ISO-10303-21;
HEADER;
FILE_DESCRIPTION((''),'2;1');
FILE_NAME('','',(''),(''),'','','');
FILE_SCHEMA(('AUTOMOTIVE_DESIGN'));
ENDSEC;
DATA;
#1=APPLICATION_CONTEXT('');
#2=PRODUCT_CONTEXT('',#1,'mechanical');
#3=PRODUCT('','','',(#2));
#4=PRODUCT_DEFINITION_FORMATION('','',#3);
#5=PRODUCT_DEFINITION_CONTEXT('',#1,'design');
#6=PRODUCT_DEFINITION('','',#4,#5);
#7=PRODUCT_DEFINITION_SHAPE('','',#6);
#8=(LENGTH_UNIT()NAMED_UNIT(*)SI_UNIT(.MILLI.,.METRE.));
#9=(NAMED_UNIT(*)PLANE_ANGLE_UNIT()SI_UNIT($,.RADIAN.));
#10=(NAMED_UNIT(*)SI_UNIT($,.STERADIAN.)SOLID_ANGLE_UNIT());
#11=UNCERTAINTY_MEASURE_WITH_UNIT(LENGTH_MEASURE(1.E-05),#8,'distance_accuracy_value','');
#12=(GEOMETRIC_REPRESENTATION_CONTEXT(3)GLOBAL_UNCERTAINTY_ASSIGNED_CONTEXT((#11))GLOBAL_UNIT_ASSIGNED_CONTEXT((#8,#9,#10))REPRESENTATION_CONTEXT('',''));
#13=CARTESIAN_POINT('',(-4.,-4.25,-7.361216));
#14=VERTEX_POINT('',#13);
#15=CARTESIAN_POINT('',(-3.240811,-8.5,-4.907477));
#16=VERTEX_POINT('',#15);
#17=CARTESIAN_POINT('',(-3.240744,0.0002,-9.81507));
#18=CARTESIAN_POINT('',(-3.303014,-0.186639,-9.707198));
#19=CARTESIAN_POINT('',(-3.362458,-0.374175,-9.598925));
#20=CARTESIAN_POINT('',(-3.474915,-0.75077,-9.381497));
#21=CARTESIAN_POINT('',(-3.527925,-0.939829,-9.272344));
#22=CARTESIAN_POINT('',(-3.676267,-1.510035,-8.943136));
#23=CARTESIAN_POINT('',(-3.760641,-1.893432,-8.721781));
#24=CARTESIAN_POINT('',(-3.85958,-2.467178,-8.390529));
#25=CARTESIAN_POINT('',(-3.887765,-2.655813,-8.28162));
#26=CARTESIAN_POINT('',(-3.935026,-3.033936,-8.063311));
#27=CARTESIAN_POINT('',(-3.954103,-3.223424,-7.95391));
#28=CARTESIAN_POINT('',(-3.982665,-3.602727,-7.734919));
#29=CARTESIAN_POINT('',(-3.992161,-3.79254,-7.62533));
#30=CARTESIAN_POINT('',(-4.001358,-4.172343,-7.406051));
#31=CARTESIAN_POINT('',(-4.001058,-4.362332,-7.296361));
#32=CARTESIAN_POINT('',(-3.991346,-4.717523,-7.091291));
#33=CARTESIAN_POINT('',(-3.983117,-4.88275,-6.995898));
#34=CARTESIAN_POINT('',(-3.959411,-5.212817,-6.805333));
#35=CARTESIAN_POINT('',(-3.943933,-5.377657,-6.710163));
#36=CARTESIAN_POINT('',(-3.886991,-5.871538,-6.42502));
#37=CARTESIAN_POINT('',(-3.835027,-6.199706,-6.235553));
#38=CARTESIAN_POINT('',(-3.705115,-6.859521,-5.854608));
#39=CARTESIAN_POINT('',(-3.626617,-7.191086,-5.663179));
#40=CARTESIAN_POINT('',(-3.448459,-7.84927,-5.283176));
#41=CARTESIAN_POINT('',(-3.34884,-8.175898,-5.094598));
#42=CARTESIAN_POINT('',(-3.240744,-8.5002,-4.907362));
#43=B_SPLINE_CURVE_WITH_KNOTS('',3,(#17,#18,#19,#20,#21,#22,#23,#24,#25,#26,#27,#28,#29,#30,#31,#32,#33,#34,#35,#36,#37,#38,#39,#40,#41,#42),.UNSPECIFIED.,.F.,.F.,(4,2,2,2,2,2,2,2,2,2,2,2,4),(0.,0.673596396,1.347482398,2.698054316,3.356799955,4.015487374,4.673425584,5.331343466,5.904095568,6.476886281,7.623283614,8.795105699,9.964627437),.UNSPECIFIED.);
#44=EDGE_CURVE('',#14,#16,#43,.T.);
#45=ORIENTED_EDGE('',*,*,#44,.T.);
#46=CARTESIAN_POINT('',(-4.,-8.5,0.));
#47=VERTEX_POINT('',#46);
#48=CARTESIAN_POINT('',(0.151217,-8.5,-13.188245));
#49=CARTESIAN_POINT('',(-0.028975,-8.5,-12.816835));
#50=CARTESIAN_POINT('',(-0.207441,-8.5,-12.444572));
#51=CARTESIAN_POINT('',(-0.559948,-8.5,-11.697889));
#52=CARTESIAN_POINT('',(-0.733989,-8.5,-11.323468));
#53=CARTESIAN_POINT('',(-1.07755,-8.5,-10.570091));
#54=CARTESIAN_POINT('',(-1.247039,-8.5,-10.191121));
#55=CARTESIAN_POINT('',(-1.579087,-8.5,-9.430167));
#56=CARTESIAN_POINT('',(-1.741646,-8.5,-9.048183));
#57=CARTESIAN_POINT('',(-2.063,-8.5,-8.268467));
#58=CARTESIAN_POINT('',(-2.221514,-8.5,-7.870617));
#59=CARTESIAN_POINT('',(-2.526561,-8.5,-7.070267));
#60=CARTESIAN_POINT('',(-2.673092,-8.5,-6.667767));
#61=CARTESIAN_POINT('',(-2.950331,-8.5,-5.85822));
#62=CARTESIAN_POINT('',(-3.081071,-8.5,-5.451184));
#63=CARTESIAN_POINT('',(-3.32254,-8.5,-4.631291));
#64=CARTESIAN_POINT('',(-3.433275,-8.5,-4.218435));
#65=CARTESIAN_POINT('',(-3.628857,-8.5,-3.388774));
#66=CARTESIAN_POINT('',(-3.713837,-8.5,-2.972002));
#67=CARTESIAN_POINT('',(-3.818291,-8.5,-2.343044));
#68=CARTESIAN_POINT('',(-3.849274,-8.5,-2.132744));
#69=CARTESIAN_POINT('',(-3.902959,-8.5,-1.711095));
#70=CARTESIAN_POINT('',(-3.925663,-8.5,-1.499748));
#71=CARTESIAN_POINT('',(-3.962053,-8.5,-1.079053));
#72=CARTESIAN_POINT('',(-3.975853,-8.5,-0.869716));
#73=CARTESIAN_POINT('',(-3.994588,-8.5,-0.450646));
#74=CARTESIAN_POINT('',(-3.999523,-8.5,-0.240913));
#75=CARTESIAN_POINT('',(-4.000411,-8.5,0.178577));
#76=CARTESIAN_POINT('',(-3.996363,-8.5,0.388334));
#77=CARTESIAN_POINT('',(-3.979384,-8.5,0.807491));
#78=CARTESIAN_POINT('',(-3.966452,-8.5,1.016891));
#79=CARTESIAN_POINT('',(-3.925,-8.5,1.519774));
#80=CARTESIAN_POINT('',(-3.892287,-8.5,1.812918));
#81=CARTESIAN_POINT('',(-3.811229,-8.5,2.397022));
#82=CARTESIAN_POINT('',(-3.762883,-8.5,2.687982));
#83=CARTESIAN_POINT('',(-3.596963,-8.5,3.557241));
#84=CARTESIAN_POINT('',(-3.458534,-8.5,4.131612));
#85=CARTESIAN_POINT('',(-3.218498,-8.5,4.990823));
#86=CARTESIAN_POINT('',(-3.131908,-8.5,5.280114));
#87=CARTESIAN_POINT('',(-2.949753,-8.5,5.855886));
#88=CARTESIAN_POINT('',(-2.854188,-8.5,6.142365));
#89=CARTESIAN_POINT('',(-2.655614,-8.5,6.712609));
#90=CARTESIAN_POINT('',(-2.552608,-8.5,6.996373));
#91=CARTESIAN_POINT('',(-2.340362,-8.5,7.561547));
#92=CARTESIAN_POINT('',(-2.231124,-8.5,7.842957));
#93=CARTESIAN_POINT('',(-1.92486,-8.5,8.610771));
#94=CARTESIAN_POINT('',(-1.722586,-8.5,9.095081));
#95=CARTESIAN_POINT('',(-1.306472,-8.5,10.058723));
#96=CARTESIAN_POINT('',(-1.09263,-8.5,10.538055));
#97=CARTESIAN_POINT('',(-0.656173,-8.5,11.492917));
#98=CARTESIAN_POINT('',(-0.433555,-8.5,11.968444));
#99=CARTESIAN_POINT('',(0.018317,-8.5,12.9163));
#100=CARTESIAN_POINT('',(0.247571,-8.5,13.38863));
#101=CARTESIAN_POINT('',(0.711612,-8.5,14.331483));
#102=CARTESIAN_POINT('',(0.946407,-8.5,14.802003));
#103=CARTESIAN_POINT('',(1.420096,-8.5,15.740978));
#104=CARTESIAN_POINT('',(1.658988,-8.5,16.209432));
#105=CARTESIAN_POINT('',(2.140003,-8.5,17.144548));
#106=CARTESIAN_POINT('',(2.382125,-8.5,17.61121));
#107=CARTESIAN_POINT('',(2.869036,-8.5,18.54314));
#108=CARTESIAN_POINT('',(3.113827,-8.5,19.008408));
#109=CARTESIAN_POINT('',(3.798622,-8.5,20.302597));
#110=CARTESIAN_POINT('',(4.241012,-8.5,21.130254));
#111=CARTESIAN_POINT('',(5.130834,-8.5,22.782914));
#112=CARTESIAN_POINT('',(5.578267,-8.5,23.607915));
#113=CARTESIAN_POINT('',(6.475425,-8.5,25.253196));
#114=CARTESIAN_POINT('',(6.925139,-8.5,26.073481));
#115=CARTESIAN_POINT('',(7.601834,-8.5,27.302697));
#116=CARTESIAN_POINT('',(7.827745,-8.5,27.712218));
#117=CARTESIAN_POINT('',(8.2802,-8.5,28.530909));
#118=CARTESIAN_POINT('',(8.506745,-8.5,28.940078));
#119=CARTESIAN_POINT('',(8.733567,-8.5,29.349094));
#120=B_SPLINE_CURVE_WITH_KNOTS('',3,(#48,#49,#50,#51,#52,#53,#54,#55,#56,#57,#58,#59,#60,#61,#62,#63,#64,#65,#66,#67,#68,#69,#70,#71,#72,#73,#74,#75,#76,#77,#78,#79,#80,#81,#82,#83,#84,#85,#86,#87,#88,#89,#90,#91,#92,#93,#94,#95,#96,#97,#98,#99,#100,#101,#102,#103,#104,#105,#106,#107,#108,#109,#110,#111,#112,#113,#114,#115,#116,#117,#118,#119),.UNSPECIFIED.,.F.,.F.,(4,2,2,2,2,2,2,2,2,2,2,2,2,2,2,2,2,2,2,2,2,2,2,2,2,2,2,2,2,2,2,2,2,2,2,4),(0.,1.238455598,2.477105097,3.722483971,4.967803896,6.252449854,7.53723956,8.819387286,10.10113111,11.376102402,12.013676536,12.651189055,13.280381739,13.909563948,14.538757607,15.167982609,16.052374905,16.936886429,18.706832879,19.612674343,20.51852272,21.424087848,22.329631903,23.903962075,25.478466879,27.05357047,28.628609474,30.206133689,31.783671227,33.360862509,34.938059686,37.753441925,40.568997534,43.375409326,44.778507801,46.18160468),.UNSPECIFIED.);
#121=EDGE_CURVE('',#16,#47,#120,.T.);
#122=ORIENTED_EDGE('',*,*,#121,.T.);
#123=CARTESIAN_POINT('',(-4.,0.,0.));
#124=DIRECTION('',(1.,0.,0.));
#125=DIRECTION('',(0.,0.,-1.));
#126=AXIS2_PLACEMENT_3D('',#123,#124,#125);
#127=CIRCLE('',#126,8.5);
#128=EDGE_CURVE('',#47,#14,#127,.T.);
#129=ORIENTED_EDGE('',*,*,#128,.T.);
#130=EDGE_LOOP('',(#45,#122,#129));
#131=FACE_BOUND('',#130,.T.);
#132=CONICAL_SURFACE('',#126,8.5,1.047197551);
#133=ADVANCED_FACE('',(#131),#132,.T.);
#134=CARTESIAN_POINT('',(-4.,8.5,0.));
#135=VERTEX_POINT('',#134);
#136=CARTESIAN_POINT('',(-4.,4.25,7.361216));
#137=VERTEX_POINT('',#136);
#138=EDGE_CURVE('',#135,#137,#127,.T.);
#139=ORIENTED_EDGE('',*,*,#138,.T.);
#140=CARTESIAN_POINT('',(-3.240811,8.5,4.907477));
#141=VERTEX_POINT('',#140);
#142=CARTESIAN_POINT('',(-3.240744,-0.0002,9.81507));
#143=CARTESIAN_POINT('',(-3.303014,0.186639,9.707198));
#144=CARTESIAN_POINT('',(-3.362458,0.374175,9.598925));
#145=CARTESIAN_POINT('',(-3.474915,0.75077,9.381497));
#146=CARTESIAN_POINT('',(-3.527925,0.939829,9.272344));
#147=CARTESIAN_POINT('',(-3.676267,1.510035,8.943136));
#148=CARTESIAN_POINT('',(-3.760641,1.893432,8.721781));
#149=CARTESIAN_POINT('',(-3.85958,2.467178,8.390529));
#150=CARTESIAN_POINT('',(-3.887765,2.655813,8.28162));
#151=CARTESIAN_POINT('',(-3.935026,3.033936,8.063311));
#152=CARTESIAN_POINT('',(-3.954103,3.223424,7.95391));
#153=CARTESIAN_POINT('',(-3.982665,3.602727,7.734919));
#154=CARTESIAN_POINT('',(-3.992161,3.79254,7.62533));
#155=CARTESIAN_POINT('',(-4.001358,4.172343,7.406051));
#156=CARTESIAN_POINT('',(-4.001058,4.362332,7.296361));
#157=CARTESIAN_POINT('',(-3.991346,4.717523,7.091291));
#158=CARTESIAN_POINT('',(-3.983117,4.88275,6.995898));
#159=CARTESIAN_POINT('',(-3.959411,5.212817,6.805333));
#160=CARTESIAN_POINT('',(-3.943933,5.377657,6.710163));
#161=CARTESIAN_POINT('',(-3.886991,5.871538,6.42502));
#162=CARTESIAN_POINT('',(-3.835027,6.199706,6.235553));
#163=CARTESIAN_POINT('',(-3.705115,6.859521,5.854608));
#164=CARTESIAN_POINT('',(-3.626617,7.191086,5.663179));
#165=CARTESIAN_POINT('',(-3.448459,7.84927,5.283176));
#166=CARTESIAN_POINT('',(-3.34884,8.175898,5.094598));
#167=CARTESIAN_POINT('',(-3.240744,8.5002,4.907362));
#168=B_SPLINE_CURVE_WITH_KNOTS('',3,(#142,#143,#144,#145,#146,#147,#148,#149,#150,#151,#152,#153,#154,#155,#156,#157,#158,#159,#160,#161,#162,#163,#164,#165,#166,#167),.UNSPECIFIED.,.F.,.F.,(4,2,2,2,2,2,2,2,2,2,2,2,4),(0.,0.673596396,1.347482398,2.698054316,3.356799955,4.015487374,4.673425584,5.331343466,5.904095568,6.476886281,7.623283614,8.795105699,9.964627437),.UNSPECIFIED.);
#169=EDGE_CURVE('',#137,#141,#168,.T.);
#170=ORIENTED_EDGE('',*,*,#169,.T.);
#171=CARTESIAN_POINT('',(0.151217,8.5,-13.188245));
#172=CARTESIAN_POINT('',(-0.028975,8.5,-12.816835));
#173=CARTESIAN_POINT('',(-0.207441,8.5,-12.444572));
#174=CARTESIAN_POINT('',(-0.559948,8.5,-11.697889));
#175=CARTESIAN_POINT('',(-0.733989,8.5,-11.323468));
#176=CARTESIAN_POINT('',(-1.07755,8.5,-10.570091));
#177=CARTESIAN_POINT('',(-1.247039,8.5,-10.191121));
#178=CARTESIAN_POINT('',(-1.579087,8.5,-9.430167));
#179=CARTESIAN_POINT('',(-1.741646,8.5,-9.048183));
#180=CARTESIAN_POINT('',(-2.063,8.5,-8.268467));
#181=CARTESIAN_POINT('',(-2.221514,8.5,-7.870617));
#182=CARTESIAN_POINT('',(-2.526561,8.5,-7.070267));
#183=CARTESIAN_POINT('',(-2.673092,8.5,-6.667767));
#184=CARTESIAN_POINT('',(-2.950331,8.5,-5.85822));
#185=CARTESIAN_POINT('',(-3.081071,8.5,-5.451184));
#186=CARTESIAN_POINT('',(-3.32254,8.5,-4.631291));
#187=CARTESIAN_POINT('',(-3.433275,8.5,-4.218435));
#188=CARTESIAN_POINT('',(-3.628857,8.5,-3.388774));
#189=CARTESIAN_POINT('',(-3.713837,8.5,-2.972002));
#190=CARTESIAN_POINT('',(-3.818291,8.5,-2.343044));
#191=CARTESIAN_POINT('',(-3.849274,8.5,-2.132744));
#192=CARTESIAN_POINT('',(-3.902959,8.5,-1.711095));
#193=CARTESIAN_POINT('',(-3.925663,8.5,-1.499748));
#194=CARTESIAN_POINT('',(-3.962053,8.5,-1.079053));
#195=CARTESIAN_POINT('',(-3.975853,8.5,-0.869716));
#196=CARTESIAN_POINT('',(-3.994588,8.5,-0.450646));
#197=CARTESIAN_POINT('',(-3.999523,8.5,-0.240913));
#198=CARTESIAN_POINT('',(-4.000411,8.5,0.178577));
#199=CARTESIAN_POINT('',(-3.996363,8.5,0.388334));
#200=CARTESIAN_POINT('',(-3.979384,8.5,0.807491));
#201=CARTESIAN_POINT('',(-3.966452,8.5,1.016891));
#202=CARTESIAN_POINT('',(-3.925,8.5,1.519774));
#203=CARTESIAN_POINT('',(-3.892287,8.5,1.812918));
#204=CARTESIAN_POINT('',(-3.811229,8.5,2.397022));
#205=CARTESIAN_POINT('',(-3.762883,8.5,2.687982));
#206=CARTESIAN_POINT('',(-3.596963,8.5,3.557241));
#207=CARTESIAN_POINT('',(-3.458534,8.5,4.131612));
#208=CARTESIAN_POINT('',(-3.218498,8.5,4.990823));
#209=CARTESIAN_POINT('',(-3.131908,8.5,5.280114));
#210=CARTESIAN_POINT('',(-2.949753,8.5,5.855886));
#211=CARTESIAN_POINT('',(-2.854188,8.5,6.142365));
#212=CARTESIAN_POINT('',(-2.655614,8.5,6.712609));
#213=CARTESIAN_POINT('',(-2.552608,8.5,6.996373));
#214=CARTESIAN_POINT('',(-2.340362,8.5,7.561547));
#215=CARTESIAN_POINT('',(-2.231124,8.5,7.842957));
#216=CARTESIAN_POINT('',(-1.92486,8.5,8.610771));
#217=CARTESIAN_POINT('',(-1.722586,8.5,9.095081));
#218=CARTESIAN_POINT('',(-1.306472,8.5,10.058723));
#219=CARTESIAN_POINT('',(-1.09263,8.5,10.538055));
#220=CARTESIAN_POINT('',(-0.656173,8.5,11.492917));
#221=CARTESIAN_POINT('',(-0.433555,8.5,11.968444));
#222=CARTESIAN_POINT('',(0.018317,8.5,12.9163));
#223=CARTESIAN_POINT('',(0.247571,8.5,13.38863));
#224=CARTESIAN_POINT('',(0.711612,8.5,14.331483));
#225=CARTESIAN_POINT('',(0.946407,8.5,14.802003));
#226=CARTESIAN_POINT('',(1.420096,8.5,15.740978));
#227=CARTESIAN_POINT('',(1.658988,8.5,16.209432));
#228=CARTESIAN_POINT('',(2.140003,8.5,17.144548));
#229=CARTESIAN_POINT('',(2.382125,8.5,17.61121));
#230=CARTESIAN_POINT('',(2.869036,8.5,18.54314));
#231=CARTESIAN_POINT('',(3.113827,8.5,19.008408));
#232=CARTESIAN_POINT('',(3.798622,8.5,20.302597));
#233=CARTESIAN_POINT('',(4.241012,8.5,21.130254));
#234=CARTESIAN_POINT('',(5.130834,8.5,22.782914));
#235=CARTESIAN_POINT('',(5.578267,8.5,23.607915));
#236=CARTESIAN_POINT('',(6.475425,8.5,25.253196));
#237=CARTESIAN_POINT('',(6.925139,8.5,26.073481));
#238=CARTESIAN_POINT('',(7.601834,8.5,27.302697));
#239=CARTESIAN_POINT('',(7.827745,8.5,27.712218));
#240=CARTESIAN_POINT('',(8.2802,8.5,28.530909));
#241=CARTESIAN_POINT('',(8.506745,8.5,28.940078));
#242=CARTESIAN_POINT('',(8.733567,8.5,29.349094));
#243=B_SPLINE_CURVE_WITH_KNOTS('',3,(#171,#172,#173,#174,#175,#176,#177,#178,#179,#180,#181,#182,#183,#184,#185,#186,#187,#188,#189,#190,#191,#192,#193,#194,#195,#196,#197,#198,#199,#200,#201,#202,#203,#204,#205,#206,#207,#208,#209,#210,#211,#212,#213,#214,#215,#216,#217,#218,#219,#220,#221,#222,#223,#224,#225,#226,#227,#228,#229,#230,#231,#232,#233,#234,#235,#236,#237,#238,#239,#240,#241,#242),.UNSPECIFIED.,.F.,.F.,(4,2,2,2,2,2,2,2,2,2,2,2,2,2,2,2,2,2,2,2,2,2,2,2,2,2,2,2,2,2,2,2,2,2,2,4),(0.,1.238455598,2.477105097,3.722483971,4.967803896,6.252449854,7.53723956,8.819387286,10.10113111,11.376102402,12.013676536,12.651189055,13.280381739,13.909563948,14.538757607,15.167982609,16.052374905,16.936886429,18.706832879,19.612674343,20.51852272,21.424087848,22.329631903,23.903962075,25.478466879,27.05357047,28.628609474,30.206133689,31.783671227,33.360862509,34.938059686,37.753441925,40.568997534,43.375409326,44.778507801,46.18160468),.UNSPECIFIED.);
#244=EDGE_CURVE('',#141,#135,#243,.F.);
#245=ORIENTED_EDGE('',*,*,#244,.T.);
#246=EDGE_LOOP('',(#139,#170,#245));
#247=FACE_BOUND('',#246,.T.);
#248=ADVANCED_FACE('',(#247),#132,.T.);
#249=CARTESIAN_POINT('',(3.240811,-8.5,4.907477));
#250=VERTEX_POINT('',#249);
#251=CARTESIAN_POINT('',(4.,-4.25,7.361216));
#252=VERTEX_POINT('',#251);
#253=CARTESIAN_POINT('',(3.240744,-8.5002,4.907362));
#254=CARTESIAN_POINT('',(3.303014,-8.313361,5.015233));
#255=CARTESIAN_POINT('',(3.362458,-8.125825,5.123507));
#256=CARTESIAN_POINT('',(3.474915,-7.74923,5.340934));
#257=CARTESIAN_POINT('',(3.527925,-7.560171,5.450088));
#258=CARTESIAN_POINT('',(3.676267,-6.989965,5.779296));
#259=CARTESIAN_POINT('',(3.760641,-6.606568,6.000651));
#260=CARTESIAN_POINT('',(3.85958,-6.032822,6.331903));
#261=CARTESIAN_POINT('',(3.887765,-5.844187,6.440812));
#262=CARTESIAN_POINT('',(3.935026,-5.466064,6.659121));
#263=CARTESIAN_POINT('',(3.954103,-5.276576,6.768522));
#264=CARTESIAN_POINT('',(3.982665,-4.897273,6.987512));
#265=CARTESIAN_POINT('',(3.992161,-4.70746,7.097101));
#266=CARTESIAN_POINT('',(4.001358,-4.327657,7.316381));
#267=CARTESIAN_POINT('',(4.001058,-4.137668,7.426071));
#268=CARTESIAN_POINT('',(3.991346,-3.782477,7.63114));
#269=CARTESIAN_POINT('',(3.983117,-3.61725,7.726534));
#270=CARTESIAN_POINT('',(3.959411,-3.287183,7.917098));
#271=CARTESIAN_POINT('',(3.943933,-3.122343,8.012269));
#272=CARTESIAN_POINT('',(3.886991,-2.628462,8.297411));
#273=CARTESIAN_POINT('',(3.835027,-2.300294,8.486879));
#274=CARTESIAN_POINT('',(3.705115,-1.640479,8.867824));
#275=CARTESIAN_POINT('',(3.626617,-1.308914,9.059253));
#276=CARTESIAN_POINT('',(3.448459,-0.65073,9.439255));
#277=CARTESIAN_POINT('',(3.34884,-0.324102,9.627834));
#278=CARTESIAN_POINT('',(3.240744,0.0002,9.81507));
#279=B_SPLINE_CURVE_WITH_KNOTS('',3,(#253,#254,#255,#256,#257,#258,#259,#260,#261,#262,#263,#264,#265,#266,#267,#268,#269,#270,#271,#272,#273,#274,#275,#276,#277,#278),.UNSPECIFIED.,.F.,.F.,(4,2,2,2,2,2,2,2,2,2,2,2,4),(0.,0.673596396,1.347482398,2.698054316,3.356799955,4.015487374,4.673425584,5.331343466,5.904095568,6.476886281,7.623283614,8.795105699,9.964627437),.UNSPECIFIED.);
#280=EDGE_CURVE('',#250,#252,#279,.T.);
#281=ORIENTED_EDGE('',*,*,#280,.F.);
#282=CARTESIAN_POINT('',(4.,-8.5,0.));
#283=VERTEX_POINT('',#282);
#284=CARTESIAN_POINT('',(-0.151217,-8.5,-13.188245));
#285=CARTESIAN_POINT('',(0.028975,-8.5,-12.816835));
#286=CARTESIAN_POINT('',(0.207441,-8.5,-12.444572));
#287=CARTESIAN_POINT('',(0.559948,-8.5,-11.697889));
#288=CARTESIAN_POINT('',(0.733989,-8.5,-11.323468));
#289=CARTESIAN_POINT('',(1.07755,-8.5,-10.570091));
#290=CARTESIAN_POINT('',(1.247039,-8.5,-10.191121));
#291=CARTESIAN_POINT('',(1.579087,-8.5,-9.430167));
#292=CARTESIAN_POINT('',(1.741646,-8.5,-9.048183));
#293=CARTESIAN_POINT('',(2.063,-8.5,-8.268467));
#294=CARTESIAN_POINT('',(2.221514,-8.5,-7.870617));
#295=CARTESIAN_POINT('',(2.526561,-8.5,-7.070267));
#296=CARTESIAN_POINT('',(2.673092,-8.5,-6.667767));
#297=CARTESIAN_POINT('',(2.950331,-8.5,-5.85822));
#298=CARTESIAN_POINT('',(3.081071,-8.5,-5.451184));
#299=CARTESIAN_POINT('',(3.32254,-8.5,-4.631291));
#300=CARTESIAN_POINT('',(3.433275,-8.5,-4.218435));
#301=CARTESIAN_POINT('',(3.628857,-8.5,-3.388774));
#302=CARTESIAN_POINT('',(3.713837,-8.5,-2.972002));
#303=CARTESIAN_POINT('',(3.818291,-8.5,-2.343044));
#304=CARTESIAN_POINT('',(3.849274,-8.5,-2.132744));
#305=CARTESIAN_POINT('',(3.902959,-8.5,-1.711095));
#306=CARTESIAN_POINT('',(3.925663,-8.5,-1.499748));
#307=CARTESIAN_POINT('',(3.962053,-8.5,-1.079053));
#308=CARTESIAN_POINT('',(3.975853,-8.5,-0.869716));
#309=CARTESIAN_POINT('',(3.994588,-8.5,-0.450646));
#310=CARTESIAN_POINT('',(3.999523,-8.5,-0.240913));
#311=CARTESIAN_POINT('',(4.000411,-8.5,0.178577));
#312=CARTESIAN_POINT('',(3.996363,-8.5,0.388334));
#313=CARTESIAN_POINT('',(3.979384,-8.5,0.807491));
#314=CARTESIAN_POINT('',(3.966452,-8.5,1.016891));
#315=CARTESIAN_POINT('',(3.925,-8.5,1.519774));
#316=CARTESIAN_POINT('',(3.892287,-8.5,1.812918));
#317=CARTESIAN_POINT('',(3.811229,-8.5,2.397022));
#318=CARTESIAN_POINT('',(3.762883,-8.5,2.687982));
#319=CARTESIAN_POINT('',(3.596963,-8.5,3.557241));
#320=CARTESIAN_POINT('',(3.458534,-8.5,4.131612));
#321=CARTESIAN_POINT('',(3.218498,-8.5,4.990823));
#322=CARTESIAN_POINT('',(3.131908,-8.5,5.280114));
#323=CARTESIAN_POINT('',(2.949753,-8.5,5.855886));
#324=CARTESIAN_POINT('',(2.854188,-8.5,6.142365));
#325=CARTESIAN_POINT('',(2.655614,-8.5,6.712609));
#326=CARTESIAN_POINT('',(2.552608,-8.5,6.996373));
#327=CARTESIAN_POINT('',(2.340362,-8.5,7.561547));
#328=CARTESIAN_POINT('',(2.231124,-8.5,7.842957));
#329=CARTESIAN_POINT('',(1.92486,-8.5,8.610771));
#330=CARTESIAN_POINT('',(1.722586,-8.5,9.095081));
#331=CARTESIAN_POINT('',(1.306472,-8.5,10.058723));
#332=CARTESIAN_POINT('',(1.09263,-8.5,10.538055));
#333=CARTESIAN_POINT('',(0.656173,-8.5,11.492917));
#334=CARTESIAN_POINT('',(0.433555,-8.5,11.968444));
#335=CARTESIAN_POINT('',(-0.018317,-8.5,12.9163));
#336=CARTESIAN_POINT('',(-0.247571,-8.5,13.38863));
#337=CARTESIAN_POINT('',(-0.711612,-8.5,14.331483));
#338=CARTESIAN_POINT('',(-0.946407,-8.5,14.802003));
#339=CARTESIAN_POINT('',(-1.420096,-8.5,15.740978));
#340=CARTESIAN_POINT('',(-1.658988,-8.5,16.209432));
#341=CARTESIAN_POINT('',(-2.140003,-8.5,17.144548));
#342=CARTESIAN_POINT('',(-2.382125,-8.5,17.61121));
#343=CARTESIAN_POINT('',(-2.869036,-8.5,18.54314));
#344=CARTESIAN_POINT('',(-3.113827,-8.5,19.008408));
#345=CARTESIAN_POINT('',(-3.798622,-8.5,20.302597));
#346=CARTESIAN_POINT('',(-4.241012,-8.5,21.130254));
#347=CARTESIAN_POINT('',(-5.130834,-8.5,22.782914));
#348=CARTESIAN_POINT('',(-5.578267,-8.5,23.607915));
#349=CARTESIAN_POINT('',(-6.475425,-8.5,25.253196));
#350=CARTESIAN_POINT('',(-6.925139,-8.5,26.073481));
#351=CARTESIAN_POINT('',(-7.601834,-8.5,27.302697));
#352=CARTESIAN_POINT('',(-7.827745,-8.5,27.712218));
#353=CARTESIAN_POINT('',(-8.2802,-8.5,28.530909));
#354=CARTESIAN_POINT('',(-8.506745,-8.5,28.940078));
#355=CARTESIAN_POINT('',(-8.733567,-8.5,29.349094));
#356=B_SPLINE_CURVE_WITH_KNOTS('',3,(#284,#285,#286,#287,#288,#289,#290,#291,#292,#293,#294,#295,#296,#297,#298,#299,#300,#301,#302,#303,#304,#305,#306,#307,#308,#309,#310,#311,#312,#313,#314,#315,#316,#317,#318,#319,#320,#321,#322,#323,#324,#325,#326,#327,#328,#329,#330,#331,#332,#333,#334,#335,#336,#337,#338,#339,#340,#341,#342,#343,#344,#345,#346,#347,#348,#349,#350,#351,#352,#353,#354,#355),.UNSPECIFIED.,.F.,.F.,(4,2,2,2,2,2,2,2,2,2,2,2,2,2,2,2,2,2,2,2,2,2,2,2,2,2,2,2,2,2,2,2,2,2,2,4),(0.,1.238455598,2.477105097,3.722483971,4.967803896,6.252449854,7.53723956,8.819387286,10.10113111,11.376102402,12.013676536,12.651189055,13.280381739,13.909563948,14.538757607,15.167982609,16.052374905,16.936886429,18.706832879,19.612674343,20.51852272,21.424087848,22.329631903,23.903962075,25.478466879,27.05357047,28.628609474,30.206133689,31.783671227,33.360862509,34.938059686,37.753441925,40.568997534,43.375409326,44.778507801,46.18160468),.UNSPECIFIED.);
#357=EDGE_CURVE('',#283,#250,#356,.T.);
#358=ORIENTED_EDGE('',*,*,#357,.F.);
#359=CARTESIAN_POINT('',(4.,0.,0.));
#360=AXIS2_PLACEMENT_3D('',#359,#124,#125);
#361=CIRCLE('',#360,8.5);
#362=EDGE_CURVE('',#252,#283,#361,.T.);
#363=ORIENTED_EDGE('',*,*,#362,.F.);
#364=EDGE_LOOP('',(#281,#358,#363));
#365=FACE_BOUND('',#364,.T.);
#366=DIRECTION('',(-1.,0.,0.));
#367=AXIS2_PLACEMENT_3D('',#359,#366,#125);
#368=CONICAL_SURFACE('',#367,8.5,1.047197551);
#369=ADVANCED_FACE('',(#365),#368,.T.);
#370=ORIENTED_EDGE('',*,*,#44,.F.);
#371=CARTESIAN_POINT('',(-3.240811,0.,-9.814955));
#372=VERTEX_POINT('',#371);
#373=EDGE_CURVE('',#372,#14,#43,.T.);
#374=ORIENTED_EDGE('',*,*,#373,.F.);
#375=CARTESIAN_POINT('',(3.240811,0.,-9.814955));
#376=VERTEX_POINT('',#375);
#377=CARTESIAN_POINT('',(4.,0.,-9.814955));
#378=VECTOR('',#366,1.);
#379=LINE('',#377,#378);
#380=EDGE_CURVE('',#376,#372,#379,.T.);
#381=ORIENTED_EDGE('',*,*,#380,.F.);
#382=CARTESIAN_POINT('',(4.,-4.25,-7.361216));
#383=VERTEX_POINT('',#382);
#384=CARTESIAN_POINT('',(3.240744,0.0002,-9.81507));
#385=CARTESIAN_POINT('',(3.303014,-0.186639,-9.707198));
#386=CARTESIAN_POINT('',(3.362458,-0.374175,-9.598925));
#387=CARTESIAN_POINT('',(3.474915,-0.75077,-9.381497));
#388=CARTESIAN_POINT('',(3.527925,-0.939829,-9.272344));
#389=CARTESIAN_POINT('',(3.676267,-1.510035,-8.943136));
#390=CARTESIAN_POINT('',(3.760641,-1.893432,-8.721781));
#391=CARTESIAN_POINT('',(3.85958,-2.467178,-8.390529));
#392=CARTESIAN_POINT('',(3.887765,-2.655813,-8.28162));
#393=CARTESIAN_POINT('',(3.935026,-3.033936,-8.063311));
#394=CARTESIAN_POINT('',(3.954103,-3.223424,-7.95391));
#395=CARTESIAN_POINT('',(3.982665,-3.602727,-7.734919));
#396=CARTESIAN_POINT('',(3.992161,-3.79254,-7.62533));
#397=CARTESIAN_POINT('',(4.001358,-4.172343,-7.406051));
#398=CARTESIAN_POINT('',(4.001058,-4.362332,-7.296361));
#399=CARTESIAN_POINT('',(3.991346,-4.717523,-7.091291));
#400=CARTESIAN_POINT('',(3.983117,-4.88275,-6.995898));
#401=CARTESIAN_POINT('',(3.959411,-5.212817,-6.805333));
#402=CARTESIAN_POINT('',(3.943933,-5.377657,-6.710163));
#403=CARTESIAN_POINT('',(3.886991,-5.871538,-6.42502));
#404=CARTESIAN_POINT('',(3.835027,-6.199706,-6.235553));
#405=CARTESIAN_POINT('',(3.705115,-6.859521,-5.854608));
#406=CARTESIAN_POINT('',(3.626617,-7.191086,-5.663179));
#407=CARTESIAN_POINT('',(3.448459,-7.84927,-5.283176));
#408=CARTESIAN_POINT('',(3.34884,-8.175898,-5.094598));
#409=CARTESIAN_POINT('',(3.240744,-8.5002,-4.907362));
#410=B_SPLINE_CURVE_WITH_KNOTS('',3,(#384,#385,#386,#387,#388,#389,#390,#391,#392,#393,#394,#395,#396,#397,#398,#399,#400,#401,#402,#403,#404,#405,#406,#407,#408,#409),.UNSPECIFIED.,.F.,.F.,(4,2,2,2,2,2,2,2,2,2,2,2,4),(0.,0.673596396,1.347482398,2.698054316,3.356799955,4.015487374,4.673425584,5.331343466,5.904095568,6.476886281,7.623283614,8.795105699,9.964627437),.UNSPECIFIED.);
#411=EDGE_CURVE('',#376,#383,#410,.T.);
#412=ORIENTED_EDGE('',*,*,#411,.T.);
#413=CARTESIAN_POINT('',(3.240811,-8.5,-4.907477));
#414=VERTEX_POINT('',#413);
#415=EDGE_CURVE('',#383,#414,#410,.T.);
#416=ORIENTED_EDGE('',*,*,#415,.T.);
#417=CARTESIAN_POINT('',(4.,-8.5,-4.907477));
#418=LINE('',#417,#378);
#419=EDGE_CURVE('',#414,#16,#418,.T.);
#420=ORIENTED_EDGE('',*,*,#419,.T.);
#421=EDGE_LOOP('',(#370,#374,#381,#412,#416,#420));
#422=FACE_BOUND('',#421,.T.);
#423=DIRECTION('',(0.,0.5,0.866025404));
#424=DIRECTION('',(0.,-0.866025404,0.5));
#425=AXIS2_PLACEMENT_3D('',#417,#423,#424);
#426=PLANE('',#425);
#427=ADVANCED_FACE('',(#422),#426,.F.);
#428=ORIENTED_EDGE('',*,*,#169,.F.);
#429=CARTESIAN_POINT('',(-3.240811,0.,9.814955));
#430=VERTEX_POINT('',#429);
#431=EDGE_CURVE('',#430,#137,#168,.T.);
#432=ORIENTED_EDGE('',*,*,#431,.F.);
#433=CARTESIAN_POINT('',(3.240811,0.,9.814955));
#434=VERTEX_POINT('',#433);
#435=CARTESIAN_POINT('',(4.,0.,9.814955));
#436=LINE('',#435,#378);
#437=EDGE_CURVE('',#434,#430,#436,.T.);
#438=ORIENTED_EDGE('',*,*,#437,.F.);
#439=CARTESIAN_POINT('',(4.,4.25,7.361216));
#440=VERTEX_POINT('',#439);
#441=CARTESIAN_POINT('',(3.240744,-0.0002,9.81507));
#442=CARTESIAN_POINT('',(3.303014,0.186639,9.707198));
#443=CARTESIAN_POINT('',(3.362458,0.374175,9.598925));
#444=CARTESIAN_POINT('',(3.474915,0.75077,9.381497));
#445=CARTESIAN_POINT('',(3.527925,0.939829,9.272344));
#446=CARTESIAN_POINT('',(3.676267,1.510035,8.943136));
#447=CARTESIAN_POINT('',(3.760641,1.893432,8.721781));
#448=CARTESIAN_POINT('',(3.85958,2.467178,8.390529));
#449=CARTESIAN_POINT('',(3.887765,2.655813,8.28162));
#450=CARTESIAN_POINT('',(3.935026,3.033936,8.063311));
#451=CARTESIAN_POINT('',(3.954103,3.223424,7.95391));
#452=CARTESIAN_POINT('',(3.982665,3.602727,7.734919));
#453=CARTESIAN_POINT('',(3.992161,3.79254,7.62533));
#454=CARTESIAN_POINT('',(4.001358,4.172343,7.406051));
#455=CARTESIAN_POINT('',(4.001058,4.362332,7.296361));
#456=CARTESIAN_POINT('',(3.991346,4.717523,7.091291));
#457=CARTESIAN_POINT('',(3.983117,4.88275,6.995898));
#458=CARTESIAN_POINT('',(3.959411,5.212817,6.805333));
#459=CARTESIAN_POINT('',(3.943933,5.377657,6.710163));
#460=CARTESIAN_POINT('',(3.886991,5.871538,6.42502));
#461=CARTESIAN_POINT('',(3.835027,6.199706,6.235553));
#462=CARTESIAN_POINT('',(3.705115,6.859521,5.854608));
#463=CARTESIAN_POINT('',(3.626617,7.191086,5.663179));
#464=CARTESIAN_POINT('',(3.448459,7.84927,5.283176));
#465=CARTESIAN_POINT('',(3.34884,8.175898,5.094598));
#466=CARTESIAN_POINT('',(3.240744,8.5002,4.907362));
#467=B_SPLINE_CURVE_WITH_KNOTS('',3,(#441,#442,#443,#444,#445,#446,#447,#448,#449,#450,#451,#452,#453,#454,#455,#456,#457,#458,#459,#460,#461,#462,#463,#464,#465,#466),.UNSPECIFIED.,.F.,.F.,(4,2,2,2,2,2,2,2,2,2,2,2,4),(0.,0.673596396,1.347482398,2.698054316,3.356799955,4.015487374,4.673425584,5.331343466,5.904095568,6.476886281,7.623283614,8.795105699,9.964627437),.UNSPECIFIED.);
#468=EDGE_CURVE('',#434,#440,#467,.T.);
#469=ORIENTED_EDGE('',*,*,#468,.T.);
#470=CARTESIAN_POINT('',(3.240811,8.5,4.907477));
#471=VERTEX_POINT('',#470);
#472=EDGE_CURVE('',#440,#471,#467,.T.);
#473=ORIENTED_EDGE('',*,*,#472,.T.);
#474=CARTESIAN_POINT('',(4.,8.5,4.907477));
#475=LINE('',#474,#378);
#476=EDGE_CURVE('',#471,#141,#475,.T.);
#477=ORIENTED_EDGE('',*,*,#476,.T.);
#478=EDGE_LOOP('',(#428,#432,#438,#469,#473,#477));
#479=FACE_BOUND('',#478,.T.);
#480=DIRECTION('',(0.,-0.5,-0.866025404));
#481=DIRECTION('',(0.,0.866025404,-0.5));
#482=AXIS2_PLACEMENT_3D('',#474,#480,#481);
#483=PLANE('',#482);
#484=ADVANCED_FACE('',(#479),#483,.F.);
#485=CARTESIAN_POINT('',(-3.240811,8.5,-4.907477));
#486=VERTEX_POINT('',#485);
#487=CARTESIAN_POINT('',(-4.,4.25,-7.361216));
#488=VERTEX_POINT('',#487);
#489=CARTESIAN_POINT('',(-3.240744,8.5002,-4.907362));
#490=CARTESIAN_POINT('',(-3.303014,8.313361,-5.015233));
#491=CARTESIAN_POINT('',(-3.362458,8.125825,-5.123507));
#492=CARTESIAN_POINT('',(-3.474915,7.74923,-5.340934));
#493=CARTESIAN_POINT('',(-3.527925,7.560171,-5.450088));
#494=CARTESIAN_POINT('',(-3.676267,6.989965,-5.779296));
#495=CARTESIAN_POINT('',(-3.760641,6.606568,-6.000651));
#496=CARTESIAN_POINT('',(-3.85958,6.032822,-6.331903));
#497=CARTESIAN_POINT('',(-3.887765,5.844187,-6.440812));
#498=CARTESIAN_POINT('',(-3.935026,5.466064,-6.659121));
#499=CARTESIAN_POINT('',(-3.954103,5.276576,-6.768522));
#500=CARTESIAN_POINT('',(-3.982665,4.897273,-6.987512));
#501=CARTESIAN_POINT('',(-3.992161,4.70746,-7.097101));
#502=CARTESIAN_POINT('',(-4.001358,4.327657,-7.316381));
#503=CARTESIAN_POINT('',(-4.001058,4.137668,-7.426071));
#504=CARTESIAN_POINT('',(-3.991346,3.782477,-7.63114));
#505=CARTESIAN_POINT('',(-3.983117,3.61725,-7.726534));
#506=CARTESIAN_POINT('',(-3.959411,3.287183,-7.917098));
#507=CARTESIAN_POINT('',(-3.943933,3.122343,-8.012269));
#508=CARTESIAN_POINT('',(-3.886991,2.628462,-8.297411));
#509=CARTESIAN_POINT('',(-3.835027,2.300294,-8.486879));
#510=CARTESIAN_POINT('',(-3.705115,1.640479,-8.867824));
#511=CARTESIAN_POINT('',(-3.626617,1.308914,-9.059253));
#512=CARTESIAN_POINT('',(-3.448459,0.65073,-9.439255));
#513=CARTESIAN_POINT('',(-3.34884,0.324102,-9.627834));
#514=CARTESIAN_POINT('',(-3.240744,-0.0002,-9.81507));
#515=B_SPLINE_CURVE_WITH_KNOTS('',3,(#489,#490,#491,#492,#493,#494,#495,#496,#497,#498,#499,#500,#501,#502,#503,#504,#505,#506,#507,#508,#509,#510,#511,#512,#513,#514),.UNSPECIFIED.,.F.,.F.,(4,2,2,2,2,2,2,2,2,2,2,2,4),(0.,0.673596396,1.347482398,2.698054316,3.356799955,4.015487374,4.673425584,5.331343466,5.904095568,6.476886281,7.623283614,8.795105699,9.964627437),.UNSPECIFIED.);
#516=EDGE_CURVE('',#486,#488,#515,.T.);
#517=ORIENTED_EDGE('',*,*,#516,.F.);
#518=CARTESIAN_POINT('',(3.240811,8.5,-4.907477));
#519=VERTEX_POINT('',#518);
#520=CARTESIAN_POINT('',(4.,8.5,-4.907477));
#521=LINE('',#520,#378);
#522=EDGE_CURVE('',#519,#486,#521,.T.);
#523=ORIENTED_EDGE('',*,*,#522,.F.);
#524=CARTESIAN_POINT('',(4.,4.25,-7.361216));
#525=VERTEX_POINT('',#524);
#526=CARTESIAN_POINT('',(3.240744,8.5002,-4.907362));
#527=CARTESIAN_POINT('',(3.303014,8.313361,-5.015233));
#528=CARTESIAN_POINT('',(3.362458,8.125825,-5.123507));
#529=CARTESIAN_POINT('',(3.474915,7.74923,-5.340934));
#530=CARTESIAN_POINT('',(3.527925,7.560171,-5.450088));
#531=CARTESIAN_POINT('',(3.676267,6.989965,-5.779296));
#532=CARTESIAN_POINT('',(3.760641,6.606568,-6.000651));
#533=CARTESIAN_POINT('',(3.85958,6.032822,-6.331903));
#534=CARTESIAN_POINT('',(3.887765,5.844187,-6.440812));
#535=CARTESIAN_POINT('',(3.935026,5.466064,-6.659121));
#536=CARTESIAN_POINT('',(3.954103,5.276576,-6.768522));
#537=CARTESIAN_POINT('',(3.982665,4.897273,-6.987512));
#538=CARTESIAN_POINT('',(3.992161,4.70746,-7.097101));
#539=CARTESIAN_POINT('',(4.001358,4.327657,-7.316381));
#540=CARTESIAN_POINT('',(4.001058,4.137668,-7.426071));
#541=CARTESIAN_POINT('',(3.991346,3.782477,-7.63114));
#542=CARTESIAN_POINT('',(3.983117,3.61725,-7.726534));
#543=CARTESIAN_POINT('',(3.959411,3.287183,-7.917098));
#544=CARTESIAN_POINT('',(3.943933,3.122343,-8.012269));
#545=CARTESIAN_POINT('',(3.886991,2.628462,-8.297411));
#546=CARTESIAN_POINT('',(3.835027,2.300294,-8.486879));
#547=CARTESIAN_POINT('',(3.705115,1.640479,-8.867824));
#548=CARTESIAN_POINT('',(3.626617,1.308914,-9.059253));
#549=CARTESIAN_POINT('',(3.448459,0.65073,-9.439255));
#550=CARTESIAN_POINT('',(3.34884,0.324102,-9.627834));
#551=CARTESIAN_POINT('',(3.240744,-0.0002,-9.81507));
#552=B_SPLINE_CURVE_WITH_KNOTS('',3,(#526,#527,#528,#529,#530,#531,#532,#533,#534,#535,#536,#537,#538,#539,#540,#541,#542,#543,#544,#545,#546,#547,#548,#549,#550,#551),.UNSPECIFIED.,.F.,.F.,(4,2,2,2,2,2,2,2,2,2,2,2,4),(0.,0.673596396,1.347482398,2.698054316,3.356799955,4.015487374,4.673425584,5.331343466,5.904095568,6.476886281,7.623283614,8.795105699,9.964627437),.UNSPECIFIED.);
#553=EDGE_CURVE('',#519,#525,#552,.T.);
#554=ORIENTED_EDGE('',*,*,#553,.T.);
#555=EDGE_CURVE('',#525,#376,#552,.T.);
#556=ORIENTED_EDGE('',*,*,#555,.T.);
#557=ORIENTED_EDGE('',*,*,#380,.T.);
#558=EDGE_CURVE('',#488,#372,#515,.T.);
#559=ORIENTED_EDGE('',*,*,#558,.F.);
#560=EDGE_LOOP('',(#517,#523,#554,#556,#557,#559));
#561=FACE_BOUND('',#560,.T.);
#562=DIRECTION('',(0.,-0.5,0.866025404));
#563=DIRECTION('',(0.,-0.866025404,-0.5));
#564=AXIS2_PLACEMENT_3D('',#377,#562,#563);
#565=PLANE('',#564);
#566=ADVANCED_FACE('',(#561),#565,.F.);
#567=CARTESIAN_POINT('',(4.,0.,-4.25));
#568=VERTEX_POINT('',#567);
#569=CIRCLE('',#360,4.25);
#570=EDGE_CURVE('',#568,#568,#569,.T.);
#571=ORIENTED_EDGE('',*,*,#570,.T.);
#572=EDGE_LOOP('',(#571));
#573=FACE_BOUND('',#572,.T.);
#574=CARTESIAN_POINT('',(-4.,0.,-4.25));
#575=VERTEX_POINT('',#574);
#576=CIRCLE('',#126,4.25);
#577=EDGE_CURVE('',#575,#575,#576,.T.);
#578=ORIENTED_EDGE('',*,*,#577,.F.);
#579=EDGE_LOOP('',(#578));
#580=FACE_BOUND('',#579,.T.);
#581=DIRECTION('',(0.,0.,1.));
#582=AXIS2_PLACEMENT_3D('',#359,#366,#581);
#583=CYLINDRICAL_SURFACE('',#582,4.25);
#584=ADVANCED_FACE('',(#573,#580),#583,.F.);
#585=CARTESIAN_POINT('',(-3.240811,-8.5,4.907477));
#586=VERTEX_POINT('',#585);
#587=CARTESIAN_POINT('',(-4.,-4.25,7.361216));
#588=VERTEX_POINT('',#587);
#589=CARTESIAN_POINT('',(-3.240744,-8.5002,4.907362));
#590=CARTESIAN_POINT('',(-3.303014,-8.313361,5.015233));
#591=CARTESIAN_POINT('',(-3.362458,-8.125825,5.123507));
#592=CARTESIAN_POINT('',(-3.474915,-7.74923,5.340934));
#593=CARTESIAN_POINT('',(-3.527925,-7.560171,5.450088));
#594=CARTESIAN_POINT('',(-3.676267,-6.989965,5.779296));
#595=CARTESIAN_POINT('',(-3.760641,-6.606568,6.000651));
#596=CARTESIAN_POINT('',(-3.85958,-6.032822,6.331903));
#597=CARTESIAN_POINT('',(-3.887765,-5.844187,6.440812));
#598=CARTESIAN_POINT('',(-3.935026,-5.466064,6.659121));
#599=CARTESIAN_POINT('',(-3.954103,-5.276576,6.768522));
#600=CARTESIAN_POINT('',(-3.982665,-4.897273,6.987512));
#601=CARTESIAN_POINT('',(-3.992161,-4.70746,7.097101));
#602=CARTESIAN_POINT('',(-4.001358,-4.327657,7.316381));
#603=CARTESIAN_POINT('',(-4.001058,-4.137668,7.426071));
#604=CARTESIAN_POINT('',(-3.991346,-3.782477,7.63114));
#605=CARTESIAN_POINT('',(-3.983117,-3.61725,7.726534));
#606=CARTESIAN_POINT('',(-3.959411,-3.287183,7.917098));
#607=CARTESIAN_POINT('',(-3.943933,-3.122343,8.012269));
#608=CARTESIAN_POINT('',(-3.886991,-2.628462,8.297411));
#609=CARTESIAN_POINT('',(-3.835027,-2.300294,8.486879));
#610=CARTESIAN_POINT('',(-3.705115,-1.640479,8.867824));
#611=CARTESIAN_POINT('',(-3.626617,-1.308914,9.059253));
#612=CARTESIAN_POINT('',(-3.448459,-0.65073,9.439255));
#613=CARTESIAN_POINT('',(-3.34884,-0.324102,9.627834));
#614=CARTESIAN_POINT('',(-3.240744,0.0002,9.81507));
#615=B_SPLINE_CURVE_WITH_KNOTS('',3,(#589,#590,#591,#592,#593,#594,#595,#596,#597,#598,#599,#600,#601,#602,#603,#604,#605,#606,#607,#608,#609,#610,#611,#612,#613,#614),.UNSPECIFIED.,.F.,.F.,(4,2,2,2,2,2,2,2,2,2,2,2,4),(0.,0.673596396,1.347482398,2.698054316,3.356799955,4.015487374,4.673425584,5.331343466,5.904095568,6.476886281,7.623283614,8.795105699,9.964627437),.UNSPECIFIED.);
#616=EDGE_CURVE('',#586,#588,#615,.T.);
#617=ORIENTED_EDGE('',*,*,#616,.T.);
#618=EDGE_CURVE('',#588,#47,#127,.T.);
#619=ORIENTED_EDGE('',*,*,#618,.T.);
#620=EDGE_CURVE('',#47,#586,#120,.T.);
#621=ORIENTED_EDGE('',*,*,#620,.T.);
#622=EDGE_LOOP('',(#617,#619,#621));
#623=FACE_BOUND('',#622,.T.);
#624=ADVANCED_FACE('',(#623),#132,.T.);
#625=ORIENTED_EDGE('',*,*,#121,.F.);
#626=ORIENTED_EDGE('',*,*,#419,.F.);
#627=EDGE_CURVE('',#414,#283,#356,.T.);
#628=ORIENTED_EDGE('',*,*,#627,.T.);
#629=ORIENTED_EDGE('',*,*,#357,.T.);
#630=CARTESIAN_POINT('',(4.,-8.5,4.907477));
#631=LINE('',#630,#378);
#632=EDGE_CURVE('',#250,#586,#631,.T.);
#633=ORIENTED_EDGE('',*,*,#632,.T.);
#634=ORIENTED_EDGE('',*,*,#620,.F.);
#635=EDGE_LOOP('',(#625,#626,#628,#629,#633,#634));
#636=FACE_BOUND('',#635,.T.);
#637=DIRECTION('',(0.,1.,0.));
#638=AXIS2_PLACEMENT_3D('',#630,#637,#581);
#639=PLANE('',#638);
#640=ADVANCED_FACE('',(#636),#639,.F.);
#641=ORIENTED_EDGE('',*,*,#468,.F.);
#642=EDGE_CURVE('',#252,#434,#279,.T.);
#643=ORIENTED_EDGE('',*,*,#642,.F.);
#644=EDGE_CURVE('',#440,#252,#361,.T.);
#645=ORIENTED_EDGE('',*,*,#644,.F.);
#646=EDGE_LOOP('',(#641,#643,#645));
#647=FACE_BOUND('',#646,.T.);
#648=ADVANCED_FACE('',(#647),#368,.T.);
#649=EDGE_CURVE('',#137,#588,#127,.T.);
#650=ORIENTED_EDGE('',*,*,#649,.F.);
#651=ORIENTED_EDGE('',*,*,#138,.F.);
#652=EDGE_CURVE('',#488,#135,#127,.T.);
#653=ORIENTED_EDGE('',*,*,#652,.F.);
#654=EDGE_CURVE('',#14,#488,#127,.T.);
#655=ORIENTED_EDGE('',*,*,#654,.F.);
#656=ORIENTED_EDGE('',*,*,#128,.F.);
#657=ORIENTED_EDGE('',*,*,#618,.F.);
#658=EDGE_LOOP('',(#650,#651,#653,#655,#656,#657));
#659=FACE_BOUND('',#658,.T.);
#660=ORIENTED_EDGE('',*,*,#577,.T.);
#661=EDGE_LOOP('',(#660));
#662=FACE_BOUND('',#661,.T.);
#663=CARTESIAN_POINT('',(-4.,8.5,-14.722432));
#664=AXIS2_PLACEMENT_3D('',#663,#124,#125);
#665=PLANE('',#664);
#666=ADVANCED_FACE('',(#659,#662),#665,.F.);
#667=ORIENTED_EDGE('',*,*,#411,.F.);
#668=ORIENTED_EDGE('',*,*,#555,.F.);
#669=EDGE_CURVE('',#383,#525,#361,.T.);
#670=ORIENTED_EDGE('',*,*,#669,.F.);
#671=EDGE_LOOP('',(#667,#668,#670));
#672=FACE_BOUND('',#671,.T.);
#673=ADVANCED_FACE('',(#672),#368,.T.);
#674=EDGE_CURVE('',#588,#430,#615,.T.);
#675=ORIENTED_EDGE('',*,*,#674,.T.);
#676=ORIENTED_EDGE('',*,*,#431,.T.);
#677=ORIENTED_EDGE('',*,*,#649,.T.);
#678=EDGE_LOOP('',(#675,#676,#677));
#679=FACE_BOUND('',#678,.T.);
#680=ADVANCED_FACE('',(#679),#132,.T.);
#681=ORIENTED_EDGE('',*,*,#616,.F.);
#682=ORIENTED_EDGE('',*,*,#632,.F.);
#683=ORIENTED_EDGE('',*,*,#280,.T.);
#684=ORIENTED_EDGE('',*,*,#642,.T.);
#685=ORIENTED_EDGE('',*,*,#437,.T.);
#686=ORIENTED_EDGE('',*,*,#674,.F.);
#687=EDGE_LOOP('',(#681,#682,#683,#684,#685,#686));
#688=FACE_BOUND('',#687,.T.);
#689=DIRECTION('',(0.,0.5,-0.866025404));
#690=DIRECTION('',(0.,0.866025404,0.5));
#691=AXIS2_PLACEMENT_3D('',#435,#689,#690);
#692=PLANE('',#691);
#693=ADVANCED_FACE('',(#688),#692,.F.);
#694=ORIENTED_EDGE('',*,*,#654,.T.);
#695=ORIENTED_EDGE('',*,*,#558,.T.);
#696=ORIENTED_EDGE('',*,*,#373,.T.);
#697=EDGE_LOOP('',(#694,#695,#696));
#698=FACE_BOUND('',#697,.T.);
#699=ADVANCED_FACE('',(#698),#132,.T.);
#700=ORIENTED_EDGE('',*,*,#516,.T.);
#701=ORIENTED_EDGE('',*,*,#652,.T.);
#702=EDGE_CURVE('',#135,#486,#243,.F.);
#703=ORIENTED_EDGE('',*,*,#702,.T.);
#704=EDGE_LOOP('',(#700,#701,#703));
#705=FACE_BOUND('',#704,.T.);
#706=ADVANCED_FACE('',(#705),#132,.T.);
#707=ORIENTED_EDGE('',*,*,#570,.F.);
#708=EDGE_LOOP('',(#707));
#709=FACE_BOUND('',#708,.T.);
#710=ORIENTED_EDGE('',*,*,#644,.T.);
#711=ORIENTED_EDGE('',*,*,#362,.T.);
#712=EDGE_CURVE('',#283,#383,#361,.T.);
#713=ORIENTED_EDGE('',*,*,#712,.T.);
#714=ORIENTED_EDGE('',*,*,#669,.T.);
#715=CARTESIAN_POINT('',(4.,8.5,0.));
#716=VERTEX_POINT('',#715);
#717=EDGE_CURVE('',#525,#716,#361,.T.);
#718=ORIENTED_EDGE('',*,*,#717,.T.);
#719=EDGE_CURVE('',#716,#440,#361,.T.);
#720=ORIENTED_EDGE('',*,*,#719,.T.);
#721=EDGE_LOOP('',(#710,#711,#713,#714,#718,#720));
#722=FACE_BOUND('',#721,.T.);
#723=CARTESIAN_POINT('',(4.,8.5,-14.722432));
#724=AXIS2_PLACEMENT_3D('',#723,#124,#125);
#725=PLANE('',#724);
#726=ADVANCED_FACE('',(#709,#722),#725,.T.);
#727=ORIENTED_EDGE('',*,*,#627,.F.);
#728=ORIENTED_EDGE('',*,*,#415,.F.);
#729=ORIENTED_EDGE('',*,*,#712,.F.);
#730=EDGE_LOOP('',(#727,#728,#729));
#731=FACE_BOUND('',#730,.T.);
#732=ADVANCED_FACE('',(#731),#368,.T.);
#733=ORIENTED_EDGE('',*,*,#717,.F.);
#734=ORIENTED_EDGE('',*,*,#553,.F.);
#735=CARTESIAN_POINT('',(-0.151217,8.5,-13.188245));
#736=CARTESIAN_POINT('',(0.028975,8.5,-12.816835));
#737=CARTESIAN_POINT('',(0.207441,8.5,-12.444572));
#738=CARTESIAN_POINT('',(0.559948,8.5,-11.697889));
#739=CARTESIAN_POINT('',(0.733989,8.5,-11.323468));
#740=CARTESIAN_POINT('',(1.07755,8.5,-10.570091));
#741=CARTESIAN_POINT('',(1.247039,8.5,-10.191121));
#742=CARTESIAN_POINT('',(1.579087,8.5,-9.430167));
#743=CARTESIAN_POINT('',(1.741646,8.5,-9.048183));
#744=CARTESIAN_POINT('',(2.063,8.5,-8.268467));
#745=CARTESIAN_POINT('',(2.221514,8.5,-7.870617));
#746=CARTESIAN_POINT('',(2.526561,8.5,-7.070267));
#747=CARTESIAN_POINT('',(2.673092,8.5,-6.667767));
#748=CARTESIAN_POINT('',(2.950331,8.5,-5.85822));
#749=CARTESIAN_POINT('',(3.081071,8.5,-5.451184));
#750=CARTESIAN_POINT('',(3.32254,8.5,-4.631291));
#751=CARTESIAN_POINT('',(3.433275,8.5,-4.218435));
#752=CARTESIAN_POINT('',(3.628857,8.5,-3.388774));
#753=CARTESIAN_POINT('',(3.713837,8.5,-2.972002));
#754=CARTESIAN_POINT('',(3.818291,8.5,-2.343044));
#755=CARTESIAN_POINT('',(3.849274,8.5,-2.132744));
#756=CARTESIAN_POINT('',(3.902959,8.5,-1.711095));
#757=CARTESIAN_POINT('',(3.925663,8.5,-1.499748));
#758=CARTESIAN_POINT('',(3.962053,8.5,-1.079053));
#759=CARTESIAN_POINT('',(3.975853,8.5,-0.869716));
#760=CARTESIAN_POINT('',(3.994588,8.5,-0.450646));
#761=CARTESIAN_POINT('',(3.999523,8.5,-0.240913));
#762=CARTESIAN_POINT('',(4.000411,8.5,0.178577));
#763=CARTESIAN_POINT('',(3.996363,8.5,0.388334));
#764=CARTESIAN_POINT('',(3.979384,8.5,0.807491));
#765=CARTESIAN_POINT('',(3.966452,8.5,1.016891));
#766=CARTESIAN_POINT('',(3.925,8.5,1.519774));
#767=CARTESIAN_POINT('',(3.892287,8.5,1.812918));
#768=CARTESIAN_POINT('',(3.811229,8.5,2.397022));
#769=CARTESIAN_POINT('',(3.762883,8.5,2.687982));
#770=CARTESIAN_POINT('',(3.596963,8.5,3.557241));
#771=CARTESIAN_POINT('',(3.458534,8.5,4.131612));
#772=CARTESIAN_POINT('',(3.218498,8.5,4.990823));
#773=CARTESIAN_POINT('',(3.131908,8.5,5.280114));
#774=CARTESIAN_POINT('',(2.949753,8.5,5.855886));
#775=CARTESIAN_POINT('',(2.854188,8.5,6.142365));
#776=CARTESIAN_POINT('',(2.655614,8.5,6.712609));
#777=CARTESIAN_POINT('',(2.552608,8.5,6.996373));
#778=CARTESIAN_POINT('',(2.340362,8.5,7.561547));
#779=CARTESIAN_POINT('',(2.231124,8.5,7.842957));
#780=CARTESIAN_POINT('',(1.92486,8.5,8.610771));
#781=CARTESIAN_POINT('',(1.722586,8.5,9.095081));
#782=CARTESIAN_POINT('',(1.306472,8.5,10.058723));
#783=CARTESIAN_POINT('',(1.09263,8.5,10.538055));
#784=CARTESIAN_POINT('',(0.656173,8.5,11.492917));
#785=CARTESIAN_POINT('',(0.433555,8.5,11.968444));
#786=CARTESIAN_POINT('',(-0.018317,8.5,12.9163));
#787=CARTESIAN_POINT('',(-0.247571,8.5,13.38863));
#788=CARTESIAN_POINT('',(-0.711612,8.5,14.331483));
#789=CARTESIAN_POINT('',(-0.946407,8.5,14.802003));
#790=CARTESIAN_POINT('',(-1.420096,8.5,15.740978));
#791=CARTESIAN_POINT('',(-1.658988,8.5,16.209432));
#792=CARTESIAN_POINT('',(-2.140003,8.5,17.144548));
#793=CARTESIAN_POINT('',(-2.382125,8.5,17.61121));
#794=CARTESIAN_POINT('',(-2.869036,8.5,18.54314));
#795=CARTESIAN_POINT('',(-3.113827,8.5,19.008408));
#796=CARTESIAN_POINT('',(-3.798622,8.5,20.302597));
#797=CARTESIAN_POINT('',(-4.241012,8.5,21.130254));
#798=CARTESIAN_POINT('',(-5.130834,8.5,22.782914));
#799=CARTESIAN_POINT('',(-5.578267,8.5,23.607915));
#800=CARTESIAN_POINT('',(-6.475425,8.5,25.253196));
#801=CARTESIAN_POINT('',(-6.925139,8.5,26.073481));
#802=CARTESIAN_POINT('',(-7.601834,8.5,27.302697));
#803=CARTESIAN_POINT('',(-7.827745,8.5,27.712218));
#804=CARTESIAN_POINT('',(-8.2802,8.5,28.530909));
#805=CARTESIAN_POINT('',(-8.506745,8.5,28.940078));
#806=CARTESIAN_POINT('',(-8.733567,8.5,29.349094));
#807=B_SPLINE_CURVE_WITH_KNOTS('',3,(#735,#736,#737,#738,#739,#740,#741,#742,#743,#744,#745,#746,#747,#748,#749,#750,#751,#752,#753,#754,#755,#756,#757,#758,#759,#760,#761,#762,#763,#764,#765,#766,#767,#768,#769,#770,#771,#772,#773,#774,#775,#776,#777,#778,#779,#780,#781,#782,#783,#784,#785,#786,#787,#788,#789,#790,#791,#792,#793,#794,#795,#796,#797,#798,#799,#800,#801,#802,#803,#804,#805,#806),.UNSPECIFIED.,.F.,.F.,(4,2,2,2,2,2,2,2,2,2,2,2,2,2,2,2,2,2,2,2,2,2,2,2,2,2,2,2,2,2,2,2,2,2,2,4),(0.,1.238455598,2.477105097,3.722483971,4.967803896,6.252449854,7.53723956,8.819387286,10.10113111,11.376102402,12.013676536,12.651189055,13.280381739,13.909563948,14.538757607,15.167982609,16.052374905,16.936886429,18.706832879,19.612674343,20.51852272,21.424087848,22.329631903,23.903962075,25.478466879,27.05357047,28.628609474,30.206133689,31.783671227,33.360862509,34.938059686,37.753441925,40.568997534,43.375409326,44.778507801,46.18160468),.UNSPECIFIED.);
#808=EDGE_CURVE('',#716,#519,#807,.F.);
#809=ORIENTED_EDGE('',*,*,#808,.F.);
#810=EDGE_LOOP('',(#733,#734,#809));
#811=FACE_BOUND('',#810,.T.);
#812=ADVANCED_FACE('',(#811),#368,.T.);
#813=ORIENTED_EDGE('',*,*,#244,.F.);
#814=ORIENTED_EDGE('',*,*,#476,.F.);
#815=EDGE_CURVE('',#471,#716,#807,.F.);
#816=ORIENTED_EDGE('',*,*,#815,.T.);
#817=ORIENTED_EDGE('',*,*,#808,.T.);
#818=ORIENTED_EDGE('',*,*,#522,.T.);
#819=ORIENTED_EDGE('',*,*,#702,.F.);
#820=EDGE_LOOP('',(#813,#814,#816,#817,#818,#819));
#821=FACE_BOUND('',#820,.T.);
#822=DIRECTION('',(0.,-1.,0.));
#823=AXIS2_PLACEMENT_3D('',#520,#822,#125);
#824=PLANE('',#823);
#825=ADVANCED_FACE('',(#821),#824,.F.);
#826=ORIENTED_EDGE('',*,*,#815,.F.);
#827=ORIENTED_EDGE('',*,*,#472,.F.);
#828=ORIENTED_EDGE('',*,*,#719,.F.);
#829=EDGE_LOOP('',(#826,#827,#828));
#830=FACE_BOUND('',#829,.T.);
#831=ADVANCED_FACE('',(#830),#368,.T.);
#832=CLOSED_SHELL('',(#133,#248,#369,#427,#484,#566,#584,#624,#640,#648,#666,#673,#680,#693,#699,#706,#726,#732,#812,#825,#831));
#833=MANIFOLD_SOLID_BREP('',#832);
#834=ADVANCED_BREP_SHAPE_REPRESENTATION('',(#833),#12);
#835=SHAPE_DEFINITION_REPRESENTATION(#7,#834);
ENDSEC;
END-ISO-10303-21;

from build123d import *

# Parameters (mm, degrees)
SKETCH1_R      = 4.25
EXTRUDE1_DEPTH = 4


# Read off the part's stored shape, not the designer's step: Cut-Extrude1
with BuildPart() as part:
    # Sketch1 → Extrude1 (new, symmetric)
    with BuildSketch(Plane(origin=(0, 0, 0), x_dir=(0, 0, -1), z_dir=(1, 0, 0))):
        Polygon((9.814954576, 0), (4.907477288, 8.5), (-4.907477288, 8.5), (-9.814954576, 0), (-4.907477288, -8.5), (4.907477288, -8.5), align=None)
        Circle(SKETCH1_R, mode=Mode.SUBTRACT)
    extrude(amount=EXTRUDE1_DEPTH, both=True)

    # Cut-Extrude1 outline → Cut-Extrude1 (revolve, cut)
    with BuildSketch(Plane.YX):
        Polygon((9.81495458, 4.000000073), (8.499999937, 4.000000073), (9.81495458, 3.240810619), align=None)
    cut_extrude1 = revolve(axis=Axis((0, 0, 0), (1, 0, 0)), mode=Mode.SUBTRACT)

    # Mirror1: Cut-Extrude1 across plane
    add(cut_extrude1.mirror(Plane(origin=(0, 0, 0), x_dir=(0, 0, 1), z_dir=(1, 0, 0))), mode=Mode.SUBTRACT)


solid = part.part
